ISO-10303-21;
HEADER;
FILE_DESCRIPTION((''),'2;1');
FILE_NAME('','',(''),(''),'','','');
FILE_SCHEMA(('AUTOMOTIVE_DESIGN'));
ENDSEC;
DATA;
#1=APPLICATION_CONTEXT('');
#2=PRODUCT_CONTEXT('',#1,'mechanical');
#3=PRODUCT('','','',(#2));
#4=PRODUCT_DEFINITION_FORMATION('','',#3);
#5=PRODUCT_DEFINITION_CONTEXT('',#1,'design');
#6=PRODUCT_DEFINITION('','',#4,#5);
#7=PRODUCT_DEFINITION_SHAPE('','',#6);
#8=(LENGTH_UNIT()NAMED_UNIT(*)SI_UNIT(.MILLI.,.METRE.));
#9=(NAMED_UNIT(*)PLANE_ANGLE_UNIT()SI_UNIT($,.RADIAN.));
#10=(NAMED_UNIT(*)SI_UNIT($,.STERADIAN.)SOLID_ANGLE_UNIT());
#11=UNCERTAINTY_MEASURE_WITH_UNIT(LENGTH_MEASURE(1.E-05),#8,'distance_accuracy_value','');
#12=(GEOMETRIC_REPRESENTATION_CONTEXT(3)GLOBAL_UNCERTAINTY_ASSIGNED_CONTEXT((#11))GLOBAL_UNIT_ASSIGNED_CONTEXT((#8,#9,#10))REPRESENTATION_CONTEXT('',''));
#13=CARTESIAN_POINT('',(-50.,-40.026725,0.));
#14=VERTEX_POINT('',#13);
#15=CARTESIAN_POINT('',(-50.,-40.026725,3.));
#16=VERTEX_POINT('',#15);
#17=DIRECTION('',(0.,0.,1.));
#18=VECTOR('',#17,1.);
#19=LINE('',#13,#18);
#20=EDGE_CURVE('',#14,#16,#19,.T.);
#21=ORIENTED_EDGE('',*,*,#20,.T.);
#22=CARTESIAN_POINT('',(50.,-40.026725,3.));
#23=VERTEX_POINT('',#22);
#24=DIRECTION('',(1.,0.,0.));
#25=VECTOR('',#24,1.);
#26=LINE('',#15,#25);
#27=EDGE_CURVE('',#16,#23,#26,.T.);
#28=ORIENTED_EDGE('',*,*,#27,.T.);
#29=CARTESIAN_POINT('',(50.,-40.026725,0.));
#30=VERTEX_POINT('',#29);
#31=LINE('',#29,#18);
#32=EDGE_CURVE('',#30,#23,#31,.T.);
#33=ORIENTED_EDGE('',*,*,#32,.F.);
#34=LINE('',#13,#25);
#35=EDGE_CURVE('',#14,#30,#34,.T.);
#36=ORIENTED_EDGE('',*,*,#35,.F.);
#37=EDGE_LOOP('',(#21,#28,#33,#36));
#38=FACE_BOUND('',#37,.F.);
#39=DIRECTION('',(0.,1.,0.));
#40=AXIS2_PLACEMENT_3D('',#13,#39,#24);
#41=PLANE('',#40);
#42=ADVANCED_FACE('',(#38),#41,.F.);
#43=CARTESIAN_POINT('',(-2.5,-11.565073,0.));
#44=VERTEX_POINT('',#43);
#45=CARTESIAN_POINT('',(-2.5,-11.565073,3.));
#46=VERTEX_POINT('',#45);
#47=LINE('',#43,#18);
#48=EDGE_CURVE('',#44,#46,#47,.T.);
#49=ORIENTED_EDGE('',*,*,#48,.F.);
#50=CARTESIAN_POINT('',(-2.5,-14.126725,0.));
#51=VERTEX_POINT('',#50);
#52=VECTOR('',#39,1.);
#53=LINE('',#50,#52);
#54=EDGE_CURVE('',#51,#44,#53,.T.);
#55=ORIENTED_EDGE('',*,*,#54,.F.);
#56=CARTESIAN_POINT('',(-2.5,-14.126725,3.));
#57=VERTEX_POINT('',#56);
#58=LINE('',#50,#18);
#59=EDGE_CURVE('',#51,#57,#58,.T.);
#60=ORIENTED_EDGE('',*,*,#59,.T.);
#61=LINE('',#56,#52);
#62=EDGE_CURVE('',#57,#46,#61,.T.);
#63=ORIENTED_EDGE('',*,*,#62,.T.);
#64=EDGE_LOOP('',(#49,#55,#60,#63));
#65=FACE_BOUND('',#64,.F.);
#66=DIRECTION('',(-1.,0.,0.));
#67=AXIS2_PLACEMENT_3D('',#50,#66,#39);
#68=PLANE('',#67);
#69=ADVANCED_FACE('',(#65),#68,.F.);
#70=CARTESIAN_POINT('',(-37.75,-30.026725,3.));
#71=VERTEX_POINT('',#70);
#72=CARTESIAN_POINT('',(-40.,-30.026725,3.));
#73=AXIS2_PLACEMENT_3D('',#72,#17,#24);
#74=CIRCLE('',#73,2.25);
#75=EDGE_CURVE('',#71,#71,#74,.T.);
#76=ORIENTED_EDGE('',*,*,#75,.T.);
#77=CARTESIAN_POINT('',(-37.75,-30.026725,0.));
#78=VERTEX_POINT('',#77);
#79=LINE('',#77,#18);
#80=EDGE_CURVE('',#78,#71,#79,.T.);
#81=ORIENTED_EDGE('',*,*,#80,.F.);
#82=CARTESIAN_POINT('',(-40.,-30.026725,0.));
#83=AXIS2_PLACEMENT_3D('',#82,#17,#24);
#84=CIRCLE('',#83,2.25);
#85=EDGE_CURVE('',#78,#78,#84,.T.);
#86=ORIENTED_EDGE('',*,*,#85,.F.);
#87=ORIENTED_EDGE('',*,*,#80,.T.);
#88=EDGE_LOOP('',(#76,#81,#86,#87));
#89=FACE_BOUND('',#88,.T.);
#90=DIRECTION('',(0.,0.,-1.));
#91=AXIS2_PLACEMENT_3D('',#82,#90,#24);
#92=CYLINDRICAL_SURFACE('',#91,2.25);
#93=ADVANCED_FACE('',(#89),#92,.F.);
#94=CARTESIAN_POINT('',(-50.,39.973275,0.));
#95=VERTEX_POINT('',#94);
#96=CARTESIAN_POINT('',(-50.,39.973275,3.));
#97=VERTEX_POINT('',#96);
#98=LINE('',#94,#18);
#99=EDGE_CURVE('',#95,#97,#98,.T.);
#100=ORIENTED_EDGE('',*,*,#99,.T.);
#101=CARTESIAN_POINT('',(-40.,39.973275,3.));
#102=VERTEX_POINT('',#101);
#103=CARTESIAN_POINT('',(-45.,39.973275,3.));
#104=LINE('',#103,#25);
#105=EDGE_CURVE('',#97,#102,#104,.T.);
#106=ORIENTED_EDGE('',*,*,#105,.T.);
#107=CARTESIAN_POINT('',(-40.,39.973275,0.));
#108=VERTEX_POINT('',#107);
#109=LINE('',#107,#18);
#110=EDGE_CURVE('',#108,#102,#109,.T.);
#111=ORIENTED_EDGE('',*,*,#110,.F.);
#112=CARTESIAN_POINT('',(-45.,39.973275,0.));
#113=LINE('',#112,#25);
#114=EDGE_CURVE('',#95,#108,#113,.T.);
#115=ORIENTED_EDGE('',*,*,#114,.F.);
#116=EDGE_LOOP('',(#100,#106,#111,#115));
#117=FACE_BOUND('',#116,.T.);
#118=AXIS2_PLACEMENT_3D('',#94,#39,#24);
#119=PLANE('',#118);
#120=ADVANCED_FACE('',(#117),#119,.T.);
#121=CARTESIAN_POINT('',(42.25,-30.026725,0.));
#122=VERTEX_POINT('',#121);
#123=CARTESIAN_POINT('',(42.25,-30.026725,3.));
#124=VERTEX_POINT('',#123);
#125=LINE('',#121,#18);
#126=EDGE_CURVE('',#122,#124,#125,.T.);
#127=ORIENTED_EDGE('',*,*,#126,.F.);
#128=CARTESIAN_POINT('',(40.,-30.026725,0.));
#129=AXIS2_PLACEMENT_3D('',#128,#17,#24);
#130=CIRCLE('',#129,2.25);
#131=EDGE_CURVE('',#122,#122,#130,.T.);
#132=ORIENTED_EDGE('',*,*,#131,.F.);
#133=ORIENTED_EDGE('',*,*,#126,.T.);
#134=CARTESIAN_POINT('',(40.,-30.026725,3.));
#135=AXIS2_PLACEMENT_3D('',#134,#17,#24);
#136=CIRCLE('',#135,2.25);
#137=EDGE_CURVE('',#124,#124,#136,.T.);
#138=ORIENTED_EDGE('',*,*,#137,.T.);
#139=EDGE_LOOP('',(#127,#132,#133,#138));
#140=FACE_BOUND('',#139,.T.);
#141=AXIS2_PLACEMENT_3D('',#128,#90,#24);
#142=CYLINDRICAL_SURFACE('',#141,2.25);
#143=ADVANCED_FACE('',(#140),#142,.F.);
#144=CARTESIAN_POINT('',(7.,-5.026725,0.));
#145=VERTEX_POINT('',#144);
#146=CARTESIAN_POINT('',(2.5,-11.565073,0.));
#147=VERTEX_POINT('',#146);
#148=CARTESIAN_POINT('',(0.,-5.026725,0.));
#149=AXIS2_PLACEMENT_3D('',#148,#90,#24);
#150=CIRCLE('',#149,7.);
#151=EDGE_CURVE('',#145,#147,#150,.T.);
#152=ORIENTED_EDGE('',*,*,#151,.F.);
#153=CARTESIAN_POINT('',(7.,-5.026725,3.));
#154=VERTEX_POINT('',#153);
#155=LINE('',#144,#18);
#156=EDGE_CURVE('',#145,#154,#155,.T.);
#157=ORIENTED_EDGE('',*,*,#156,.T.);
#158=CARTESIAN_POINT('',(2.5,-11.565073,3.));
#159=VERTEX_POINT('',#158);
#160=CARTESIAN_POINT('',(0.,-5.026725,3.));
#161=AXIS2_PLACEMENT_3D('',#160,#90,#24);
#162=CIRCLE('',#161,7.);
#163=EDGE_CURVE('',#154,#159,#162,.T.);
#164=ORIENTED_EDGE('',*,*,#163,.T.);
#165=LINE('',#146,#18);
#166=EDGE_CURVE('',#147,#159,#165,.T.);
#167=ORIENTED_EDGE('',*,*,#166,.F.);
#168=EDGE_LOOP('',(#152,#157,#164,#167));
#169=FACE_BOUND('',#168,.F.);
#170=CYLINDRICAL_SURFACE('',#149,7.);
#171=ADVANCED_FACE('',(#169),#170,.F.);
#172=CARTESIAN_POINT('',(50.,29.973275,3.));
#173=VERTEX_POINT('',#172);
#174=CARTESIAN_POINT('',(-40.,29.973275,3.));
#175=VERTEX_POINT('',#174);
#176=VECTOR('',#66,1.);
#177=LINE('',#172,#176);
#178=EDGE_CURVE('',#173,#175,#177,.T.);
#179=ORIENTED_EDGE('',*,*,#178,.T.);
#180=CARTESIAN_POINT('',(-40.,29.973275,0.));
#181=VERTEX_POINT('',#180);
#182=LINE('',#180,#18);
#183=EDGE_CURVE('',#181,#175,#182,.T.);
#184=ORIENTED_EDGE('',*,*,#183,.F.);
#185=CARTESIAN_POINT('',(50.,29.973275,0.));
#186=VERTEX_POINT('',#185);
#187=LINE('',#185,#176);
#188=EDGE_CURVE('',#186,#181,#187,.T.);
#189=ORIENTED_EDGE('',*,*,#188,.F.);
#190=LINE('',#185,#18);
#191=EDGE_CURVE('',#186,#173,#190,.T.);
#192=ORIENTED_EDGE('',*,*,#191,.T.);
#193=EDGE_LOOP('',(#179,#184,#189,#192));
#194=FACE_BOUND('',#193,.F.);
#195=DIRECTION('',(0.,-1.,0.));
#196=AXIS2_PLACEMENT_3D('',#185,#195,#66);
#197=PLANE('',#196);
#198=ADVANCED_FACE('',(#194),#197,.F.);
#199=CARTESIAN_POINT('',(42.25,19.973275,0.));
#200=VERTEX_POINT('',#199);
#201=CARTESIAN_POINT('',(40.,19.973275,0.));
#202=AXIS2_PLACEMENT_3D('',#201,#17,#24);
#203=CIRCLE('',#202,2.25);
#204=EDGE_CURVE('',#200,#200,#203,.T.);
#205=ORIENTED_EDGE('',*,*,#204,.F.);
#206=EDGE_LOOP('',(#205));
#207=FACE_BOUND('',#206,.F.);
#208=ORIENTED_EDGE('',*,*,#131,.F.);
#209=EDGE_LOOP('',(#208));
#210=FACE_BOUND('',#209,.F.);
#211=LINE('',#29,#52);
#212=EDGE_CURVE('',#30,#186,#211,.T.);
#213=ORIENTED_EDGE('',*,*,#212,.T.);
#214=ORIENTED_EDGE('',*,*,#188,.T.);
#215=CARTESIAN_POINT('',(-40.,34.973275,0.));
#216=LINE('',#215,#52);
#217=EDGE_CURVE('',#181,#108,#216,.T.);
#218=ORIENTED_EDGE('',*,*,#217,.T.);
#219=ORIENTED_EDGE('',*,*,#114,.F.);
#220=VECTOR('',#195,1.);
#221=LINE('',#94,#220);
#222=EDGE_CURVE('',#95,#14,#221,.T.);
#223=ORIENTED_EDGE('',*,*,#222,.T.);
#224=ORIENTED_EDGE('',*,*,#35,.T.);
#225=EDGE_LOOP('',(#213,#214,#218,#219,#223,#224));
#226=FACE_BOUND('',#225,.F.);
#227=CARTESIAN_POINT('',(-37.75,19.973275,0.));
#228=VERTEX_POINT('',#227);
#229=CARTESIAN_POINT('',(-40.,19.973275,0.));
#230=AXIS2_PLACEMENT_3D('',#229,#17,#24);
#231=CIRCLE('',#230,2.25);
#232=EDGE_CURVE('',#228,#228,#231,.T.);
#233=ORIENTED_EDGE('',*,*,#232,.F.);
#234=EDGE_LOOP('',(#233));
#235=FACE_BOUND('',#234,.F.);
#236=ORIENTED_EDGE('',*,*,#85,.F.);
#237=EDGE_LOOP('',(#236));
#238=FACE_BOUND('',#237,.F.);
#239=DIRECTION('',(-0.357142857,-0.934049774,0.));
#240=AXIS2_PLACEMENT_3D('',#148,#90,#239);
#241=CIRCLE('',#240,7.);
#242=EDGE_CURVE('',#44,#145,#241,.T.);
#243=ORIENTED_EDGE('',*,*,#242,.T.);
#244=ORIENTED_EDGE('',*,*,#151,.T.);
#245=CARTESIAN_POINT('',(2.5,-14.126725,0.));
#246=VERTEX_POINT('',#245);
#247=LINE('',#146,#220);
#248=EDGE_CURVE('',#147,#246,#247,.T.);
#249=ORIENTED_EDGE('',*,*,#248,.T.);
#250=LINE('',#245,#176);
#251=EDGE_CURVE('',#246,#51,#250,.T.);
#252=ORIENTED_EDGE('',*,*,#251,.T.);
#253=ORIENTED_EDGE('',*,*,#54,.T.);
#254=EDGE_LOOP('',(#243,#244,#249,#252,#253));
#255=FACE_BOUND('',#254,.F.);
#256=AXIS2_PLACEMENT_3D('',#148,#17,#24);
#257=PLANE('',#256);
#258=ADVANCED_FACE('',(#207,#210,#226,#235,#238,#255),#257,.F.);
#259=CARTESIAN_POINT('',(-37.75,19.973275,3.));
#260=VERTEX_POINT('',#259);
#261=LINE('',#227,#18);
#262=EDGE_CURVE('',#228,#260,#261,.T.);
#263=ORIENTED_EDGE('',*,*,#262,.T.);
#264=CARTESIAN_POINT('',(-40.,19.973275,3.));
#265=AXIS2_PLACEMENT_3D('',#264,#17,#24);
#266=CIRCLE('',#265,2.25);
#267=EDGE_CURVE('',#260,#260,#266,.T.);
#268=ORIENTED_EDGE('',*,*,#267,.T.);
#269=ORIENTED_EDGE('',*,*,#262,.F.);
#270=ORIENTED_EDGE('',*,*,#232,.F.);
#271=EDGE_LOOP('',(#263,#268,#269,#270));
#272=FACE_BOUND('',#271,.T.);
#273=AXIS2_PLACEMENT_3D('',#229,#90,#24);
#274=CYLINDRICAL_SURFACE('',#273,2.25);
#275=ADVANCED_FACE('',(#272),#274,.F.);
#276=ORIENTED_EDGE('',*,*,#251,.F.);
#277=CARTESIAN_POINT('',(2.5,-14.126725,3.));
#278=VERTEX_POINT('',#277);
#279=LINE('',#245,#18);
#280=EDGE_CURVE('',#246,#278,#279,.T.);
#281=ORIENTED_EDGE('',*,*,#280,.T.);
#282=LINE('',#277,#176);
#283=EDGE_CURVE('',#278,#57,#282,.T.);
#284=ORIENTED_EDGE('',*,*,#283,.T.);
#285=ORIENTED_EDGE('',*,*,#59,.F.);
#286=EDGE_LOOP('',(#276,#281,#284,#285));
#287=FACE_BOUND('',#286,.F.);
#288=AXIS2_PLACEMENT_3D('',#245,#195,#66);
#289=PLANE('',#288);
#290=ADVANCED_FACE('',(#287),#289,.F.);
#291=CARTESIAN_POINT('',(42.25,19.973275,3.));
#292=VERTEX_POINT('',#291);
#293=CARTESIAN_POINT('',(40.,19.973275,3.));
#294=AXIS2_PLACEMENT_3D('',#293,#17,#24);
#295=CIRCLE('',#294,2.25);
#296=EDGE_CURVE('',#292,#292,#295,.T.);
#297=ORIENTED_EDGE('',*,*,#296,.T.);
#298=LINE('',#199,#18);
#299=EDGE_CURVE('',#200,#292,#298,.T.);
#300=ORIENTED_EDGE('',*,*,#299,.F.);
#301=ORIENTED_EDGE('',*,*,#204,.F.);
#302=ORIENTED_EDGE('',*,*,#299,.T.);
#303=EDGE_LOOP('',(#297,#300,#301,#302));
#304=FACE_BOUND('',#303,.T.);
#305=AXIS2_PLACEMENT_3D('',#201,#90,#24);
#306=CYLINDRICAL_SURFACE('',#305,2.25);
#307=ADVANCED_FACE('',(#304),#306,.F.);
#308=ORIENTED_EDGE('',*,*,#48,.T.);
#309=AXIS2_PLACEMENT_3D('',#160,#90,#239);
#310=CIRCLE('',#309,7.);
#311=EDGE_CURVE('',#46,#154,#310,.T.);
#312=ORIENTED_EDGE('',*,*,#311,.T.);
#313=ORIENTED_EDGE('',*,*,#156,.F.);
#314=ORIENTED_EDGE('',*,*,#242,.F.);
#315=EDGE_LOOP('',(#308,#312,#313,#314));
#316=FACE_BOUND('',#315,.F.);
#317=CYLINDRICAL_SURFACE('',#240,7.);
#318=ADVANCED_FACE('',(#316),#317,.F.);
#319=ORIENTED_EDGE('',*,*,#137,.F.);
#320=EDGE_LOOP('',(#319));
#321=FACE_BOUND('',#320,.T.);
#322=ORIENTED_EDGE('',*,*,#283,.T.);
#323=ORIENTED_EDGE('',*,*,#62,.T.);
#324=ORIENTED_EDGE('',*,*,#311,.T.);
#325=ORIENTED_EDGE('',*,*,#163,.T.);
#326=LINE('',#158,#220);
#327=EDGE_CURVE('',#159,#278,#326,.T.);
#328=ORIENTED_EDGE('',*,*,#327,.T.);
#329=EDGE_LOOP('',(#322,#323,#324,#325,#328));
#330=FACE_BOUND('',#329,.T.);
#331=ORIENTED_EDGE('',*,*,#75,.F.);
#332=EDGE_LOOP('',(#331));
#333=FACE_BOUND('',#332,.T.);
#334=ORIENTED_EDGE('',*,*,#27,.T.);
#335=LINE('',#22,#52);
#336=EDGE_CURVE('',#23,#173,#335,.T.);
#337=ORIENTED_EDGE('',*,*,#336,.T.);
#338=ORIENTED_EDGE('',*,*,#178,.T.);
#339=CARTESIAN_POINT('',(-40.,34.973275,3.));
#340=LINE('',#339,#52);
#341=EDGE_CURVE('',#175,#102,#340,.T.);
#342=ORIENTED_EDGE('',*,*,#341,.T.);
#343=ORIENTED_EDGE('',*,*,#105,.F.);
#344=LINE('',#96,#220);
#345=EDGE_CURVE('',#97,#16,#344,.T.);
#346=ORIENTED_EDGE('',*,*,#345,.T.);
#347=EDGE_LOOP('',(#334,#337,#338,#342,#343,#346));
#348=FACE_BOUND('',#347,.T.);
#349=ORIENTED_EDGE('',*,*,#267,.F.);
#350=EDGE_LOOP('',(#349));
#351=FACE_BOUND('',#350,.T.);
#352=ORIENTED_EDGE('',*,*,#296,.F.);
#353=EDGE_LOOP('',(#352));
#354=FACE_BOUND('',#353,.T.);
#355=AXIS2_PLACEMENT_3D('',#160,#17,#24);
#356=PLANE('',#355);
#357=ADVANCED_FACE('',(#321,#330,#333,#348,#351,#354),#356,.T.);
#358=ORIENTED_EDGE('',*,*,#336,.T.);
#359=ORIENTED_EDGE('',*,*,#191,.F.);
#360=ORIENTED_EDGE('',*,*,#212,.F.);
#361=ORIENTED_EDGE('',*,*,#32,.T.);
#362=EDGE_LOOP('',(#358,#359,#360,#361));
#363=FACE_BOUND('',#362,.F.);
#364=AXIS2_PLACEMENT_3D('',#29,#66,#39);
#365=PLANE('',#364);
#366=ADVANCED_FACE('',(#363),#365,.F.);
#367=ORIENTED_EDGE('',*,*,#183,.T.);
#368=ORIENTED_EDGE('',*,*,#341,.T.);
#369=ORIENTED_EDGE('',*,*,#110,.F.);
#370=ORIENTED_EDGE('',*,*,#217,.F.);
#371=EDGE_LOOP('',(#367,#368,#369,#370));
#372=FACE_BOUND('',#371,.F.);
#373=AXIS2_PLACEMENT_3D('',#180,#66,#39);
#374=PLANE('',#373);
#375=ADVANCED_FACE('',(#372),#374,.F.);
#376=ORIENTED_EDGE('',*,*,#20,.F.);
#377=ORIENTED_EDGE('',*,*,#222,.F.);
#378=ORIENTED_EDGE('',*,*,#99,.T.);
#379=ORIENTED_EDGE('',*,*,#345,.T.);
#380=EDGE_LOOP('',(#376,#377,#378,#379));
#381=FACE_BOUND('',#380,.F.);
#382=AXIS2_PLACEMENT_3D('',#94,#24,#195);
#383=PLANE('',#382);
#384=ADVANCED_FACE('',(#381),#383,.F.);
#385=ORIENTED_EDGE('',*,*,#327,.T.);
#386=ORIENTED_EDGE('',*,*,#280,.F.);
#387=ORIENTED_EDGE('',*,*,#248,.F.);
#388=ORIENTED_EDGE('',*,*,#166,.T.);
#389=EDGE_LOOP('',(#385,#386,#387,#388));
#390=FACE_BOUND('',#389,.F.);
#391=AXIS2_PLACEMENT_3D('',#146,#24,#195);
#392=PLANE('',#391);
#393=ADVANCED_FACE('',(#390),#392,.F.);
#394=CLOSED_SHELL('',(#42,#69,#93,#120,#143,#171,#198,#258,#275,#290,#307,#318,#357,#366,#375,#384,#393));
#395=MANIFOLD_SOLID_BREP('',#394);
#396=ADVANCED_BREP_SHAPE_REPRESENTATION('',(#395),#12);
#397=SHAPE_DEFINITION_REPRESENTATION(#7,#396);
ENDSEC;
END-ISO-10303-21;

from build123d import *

# Parameters (mm, degrees)
F0_R     = 2.25
F0_W     = 10
F0_H     = 10
F1_DEPTH = 3


# Not quite as in the source:
# - a feature names something its author has since deleted; it is built from what else it names


with BuildPart() as f1:
    # F0 (on Top) → F1 (new body)
    with BuildSketch(Plane.XY):
        Polygon((-50, -40.0267248601), (50, -40.0267248601), (50, 29.9732751399), (-40, 29.9732751399), (-50, 29.9732751399), align=None)
        with Locations((-40, -30.0267248601)):
            Circle(F0_R, mode=Mode.SUBTRACT)
        with Locations((40, -30.0267248601)):
            Circle(F0_R, mode=Mode.SUBTRACT)
        with BuildLine():
            Line((-2.5, -14.1267248601), (-2.5, -11.5650732754))
            ThreePointArc((-2.5, -11.5650732754), (-3.9686269666, 0.7395564373), (7, -5.0267248601))
            ThreePointArc((7, -5.0267248601), (5.7662812973, -8.9953518267), (2.5, -11.5650732754))
            Line((2.5, -11.5650732754), (2.5, -14.1267248601))
            Line((2.5, -14.1267248601), (-2.5, -14.1267248601))
        make_face(mode=Mode.SUBTRACT)
        with Locations((-40, 19.9732751399)):
            Circle(F0_R, mode=Mode.SUBTRACT)
        with Locations((40, 19.9732751399)):
            Circle(F0_R, mode=Mode.SUBTRACT)
        with Locations((-45, 34.9732751399)):
            Rectangle(F0_W, F0_H)
    extrude(amount=F1_DEPTH)


solid = f1.part
